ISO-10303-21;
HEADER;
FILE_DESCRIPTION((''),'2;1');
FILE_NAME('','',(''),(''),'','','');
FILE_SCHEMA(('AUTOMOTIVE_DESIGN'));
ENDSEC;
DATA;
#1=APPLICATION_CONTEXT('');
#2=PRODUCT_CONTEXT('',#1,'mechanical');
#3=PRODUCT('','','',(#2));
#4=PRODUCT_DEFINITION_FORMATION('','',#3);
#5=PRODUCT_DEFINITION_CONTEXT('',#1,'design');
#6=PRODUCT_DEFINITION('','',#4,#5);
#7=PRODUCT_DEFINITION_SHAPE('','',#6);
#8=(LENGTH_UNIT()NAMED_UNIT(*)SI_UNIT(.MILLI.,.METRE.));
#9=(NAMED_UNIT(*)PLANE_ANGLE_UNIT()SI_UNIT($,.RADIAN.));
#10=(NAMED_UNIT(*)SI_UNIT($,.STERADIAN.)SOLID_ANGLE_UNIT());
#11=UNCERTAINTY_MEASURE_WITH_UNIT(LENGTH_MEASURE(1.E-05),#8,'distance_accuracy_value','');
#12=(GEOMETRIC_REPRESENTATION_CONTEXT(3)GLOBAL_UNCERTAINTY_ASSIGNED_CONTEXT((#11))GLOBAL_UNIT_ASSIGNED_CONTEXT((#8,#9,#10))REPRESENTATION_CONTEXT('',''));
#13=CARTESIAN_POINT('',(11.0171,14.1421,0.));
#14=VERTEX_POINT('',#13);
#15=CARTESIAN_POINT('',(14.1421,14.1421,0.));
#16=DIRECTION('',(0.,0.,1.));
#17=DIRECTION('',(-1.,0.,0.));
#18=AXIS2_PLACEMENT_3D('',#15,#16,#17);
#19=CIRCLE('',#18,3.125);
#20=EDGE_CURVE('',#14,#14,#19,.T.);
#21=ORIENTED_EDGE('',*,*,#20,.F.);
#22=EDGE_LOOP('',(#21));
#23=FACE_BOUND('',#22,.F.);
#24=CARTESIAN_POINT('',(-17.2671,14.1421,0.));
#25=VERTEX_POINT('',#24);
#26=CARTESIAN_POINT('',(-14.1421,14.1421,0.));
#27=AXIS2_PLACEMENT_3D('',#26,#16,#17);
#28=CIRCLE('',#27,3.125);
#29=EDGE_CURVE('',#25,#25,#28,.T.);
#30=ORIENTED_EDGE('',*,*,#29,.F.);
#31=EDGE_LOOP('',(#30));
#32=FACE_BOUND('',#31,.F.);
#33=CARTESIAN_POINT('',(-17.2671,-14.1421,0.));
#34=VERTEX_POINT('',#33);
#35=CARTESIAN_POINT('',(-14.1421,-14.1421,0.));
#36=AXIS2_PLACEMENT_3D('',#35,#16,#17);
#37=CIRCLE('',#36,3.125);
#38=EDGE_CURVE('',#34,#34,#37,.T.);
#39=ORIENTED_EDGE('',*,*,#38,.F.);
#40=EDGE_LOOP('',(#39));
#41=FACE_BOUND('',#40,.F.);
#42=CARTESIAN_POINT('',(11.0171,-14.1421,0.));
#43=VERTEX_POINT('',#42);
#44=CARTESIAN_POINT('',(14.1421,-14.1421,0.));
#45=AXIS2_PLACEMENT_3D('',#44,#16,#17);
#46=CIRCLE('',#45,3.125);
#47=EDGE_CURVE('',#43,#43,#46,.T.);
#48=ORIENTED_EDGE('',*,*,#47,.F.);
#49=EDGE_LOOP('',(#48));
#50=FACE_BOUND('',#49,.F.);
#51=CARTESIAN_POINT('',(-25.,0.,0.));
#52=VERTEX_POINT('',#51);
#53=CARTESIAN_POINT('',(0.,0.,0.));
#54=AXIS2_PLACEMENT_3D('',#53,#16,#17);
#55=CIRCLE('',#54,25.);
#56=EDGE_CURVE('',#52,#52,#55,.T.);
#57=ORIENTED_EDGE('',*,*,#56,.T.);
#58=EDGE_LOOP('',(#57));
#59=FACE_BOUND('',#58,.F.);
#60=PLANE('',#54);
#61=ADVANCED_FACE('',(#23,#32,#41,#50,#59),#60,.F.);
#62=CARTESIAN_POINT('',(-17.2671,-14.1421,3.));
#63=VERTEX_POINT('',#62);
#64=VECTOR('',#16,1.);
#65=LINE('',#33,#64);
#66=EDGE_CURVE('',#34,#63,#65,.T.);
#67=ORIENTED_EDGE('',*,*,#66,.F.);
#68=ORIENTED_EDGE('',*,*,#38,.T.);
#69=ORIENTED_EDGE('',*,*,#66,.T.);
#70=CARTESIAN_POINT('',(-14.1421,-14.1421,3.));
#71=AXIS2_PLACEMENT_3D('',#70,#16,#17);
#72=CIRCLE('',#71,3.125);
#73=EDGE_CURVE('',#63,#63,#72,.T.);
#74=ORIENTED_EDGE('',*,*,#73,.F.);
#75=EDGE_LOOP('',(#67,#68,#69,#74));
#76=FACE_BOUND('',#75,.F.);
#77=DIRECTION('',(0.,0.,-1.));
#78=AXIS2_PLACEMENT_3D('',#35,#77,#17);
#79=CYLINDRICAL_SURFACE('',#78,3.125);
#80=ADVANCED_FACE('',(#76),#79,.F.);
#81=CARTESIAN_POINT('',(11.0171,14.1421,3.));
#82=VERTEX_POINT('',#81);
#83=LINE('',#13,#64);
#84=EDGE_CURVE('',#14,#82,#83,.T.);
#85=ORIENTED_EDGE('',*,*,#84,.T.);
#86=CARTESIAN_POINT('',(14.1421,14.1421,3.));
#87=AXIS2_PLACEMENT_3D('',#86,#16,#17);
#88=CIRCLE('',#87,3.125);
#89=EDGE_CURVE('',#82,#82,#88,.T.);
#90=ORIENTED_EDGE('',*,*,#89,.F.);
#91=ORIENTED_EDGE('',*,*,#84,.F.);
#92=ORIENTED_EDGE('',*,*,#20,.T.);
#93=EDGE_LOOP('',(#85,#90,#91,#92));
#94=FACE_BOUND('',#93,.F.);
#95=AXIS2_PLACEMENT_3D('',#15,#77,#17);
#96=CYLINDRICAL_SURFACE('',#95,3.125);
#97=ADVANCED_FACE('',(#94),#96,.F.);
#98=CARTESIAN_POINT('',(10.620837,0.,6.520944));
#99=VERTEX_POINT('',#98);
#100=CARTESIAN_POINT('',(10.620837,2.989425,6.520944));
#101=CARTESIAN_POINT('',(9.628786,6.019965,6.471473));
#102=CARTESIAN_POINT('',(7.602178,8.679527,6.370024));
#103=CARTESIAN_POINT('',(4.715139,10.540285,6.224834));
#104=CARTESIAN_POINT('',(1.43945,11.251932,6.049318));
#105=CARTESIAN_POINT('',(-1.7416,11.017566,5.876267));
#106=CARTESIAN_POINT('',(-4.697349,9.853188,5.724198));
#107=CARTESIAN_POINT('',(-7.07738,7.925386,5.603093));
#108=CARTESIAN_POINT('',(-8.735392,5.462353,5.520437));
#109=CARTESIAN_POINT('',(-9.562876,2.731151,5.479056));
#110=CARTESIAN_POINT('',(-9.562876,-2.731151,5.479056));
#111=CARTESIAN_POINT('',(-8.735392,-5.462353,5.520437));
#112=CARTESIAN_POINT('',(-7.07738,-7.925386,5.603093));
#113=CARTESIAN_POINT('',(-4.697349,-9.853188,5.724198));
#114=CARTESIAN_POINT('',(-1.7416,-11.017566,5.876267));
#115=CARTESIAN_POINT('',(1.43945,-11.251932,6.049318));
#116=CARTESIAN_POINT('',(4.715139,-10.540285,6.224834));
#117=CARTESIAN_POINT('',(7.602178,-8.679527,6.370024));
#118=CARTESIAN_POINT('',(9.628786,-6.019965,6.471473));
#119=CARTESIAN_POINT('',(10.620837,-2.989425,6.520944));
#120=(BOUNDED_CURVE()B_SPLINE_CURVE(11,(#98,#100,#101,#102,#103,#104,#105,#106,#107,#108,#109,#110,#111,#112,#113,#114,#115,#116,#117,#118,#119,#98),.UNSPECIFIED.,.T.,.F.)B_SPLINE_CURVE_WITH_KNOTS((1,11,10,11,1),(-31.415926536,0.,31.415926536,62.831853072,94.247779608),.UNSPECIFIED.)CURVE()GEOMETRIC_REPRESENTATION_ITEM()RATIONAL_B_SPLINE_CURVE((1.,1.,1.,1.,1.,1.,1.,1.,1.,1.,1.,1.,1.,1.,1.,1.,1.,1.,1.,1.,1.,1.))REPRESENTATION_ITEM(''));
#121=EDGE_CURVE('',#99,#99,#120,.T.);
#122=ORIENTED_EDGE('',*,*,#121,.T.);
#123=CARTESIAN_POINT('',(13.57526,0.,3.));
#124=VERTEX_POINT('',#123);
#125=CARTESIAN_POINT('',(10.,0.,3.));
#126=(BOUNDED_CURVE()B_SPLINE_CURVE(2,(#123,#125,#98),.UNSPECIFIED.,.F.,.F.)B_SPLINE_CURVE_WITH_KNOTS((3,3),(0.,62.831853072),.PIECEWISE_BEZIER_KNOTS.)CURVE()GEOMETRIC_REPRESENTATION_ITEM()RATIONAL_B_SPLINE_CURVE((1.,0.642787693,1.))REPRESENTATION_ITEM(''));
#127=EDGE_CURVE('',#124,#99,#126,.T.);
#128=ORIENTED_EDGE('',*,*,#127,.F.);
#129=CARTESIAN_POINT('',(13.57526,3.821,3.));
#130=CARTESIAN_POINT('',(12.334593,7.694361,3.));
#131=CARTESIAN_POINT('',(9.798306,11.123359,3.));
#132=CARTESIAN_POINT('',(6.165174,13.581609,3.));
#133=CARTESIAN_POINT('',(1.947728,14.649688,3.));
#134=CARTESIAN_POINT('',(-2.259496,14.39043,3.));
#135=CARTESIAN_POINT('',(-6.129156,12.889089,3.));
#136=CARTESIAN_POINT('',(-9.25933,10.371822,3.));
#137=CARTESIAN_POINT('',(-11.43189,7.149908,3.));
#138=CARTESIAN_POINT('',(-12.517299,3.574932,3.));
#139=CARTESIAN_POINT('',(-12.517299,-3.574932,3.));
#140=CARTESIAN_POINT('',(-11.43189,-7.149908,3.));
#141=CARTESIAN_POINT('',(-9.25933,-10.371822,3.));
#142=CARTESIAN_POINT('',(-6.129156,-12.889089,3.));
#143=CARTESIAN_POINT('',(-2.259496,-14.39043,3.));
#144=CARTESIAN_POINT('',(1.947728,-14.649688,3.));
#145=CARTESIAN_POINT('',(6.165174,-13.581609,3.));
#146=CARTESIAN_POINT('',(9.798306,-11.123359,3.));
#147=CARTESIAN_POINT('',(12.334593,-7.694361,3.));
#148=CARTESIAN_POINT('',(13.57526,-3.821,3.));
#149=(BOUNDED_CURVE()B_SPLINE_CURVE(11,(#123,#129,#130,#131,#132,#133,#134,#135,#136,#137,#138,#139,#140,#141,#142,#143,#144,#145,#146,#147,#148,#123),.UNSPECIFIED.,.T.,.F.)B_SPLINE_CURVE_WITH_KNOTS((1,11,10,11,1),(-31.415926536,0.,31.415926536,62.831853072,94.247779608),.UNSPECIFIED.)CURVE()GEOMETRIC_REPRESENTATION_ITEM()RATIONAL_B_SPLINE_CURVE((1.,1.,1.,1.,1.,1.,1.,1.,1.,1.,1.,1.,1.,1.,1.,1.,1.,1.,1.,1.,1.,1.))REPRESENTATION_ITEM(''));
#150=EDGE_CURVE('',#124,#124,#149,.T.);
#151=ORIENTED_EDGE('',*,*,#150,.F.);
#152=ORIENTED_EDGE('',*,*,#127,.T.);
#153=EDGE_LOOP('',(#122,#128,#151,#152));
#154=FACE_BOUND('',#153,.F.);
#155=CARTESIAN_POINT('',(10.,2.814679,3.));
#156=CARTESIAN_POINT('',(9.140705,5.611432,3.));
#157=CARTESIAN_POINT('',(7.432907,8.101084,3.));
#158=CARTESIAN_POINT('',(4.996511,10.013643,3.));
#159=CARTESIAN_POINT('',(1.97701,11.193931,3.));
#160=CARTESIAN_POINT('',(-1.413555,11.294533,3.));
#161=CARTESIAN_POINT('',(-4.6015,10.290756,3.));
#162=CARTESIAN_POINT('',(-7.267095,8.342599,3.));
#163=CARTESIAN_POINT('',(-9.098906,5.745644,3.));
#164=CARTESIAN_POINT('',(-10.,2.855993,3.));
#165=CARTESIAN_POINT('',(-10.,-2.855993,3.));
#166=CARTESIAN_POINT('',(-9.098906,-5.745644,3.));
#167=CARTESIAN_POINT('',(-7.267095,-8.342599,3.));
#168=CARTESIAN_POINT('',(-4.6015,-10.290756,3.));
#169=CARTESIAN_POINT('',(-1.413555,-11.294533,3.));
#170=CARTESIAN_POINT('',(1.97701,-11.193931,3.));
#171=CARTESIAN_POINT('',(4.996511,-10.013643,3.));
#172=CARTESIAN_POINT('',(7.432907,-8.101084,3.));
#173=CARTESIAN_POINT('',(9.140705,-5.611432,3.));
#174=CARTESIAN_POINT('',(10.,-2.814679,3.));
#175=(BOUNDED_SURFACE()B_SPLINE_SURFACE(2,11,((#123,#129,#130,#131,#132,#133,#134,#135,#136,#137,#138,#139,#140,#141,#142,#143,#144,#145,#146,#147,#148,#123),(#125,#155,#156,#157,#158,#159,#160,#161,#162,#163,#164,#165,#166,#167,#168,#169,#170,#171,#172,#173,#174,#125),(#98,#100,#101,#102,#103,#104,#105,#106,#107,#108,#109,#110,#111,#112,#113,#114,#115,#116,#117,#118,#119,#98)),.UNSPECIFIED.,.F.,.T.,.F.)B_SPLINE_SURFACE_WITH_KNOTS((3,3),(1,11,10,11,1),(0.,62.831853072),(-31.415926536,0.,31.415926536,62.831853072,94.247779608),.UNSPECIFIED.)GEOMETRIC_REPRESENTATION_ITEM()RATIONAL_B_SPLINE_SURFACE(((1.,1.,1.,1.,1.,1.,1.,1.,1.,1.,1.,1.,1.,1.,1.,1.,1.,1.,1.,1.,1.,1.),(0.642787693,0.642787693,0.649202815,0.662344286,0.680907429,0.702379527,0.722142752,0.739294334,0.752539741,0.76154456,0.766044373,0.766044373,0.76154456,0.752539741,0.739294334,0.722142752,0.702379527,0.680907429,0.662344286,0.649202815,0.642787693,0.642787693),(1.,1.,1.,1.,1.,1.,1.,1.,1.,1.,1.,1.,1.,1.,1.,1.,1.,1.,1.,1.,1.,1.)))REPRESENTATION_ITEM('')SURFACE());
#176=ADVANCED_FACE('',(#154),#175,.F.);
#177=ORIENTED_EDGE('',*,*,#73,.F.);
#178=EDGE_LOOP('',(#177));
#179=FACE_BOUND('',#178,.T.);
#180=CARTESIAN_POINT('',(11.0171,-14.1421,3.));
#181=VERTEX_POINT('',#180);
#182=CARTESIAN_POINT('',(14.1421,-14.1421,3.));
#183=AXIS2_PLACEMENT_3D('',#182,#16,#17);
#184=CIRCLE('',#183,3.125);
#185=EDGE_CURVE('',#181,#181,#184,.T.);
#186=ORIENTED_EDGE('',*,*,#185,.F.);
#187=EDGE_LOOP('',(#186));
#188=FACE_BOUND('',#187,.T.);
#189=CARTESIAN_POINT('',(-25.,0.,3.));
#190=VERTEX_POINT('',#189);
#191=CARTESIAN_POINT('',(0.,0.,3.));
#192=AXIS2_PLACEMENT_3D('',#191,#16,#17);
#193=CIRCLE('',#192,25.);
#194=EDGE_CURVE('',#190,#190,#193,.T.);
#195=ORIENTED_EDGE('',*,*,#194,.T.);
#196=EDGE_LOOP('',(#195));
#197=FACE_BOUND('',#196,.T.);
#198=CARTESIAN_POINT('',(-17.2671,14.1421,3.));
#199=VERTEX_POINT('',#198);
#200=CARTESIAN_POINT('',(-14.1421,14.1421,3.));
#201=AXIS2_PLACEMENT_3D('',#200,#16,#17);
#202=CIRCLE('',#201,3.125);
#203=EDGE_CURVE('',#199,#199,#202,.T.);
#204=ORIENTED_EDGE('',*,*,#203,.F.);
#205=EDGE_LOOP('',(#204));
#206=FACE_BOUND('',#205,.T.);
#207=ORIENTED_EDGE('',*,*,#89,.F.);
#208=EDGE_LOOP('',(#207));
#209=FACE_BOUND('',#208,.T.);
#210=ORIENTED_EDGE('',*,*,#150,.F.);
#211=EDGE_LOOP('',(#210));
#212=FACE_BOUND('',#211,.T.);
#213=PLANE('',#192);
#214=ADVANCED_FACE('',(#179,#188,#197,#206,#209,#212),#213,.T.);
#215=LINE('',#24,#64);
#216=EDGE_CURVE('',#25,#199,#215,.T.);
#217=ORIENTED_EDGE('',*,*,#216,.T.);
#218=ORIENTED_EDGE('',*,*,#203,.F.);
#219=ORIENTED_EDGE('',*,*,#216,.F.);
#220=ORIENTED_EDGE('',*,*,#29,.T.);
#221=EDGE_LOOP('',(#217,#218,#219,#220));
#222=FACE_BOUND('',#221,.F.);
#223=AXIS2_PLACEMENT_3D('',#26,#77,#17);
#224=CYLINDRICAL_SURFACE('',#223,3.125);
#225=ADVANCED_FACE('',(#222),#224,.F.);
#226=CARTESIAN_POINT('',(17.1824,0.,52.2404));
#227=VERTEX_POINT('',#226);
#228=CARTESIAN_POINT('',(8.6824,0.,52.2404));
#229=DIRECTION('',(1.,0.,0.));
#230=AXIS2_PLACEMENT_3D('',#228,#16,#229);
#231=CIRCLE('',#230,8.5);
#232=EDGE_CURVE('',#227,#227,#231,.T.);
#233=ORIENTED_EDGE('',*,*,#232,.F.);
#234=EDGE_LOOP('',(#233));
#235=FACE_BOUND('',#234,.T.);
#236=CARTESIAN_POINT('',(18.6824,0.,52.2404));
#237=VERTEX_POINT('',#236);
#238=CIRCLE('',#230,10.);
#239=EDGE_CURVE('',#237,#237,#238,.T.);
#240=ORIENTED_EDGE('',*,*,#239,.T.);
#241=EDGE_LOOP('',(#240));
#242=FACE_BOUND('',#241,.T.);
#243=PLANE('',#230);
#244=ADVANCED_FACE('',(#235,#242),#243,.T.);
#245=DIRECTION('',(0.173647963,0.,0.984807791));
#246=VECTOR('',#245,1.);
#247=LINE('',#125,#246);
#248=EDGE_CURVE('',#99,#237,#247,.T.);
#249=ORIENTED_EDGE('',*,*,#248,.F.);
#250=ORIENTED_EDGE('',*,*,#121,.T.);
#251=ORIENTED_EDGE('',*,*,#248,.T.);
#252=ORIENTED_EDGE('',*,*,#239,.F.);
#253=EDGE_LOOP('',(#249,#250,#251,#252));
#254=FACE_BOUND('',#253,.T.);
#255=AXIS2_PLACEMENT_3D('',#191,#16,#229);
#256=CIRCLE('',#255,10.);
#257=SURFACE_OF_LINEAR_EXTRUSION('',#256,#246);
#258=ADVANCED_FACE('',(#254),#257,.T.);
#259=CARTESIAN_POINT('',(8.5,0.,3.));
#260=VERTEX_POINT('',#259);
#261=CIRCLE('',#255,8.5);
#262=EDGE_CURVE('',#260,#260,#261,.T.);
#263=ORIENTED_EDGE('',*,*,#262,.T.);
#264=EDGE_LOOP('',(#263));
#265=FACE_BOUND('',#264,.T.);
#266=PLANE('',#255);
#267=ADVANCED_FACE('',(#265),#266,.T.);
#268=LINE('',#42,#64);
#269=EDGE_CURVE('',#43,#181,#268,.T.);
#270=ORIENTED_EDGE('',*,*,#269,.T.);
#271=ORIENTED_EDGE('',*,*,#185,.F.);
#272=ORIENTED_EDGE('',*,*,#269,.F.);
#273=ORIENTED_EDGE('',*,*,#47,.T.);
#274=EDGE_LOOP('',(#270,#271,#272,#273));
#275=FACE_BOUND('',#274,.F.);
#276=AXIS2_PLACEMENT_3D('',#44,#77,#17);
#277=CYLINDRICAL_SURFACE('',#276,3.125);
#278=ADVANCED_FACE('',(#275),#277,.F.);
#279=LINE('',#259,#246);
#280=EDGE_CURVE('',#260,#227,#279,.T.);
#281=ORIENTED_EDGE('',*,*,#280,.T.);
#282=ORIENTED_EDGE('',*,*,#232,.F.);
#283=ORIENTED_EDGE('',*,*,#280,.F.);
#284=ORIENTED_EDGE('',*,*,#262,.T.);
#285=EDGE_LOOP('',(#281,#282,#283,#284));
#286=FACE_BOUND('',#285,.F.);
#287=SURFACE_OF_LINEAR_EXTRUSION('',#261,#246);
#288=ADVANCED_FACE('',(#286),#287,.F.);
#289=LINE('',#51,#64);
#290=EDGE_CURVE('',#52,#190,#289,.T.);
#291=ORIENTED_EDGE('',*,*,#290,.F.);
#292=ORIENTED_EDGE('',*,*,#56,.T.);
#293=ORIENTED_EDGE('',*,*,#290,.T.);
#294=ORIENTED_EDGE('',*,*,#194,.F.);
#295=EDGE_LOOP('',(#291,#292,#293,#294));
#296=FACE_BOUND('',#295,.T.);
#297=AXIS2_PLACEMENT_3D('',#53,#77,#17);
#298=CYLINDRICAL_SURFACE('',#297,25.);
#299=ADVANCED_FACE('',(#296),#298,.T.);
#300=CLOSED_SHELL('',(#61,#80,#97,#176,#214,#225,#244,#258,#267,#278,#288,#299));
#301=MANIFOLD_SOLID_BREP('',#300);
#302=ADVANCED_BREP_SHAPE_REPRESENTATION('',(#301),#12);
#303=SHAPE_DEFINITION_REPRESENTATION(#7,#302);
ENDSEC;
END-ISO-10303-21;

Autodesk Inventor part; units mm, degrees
ref_plane "YZ Plane" through (0, 0, 0) normal (1, 0, 0) x (0, 1, 0)
ref_plane "XZ Plane" through (0, 0, 0) normal (0, 1, 0) x (-1, 0, 0)
ref_plane "XY Plane" through (0, 0, 0) normal (0, 0, 1) x (1, 0, 0)
sketch "Sketch2" plane through (0, 0, 0) normal (0, 0, 1) x (-1, 0, 0)
  circle A0 centre (0, 0) radius 25
  line L0 (0, 0) -> (20, 0) construction
  line L1 (0, 0) -> (20, 0) construction
  line L2 (0, 0) -> (20, 0) construction
  line L3 (0, 0) -> (20, 0) construction
  circle A1 centre (14.1421, 14.1421) radius 3.125
  circle A2 centre (-14.1421, 14.1421) radius 3.125
  circle A3 centre (-14.1421, -14.1421) radius 3.125
  circle A4 centre (14.1421, -14.1421) radius 3.125
  dimension "d0" = 50
  dimension "d10" = 6.25
  dimension "d11" = 6.25
  dimension "d12" = 6.25
  dimension "d13" = 6.25
extrude "Extrusion1" add sketch "Sketch2" along normal blind 3
sketch "Sketch19" plane through (0, 0, 3) normal (0, 0, 1) x (1, 0, 0)
  circle A0 centre (0, 0) radius 10
  dimension "d40" = 20
sketch "Sketch22" plane through (0, 0, 0) normal (0, 1, 0) x (-1, 0, 0)
  line L0 (25, 3) -> (-25, 3) projected
  line L1 (0, 3) -> (-8.6824, 52.2404)
  line L2 (0, 3) -> (50, 3) construction
  point P0 (0, 0)
  dimension "d41" = 50
  dimension "d42" = 100
sweep "Sweep4" add profiles "Sketch19" path "Sketch22" path curves L1
sketch "Sketch23" plane through (0, 0, 3) normal (0, 0, 1) x (1, 0, 0)
  circle A0 centre (0, 0) radius 8.5
  dimension "d45" = 17
sketch "Sketch25" plane through (0, 0, 0) normal (0, 1, 0) x (-1, 0, 0)
  line L0 (25, 3) -> (-25, 3) projected
  line L1 (0, 3) -> (-8.6824, 52.2404)
  line L2 (0, 3) -> (50, 3) construction
  point P0 (0, 0)
  dimension "d46" = 50
  dimension "d47" = 100
sweep "Sweep5" cut profiles "Sketch23" path "Sketch25" path curves L1
fillet "Fillet2" radius 3 1 edges at (-10, 0, 3)
properties part number "SoporteMarcador"
